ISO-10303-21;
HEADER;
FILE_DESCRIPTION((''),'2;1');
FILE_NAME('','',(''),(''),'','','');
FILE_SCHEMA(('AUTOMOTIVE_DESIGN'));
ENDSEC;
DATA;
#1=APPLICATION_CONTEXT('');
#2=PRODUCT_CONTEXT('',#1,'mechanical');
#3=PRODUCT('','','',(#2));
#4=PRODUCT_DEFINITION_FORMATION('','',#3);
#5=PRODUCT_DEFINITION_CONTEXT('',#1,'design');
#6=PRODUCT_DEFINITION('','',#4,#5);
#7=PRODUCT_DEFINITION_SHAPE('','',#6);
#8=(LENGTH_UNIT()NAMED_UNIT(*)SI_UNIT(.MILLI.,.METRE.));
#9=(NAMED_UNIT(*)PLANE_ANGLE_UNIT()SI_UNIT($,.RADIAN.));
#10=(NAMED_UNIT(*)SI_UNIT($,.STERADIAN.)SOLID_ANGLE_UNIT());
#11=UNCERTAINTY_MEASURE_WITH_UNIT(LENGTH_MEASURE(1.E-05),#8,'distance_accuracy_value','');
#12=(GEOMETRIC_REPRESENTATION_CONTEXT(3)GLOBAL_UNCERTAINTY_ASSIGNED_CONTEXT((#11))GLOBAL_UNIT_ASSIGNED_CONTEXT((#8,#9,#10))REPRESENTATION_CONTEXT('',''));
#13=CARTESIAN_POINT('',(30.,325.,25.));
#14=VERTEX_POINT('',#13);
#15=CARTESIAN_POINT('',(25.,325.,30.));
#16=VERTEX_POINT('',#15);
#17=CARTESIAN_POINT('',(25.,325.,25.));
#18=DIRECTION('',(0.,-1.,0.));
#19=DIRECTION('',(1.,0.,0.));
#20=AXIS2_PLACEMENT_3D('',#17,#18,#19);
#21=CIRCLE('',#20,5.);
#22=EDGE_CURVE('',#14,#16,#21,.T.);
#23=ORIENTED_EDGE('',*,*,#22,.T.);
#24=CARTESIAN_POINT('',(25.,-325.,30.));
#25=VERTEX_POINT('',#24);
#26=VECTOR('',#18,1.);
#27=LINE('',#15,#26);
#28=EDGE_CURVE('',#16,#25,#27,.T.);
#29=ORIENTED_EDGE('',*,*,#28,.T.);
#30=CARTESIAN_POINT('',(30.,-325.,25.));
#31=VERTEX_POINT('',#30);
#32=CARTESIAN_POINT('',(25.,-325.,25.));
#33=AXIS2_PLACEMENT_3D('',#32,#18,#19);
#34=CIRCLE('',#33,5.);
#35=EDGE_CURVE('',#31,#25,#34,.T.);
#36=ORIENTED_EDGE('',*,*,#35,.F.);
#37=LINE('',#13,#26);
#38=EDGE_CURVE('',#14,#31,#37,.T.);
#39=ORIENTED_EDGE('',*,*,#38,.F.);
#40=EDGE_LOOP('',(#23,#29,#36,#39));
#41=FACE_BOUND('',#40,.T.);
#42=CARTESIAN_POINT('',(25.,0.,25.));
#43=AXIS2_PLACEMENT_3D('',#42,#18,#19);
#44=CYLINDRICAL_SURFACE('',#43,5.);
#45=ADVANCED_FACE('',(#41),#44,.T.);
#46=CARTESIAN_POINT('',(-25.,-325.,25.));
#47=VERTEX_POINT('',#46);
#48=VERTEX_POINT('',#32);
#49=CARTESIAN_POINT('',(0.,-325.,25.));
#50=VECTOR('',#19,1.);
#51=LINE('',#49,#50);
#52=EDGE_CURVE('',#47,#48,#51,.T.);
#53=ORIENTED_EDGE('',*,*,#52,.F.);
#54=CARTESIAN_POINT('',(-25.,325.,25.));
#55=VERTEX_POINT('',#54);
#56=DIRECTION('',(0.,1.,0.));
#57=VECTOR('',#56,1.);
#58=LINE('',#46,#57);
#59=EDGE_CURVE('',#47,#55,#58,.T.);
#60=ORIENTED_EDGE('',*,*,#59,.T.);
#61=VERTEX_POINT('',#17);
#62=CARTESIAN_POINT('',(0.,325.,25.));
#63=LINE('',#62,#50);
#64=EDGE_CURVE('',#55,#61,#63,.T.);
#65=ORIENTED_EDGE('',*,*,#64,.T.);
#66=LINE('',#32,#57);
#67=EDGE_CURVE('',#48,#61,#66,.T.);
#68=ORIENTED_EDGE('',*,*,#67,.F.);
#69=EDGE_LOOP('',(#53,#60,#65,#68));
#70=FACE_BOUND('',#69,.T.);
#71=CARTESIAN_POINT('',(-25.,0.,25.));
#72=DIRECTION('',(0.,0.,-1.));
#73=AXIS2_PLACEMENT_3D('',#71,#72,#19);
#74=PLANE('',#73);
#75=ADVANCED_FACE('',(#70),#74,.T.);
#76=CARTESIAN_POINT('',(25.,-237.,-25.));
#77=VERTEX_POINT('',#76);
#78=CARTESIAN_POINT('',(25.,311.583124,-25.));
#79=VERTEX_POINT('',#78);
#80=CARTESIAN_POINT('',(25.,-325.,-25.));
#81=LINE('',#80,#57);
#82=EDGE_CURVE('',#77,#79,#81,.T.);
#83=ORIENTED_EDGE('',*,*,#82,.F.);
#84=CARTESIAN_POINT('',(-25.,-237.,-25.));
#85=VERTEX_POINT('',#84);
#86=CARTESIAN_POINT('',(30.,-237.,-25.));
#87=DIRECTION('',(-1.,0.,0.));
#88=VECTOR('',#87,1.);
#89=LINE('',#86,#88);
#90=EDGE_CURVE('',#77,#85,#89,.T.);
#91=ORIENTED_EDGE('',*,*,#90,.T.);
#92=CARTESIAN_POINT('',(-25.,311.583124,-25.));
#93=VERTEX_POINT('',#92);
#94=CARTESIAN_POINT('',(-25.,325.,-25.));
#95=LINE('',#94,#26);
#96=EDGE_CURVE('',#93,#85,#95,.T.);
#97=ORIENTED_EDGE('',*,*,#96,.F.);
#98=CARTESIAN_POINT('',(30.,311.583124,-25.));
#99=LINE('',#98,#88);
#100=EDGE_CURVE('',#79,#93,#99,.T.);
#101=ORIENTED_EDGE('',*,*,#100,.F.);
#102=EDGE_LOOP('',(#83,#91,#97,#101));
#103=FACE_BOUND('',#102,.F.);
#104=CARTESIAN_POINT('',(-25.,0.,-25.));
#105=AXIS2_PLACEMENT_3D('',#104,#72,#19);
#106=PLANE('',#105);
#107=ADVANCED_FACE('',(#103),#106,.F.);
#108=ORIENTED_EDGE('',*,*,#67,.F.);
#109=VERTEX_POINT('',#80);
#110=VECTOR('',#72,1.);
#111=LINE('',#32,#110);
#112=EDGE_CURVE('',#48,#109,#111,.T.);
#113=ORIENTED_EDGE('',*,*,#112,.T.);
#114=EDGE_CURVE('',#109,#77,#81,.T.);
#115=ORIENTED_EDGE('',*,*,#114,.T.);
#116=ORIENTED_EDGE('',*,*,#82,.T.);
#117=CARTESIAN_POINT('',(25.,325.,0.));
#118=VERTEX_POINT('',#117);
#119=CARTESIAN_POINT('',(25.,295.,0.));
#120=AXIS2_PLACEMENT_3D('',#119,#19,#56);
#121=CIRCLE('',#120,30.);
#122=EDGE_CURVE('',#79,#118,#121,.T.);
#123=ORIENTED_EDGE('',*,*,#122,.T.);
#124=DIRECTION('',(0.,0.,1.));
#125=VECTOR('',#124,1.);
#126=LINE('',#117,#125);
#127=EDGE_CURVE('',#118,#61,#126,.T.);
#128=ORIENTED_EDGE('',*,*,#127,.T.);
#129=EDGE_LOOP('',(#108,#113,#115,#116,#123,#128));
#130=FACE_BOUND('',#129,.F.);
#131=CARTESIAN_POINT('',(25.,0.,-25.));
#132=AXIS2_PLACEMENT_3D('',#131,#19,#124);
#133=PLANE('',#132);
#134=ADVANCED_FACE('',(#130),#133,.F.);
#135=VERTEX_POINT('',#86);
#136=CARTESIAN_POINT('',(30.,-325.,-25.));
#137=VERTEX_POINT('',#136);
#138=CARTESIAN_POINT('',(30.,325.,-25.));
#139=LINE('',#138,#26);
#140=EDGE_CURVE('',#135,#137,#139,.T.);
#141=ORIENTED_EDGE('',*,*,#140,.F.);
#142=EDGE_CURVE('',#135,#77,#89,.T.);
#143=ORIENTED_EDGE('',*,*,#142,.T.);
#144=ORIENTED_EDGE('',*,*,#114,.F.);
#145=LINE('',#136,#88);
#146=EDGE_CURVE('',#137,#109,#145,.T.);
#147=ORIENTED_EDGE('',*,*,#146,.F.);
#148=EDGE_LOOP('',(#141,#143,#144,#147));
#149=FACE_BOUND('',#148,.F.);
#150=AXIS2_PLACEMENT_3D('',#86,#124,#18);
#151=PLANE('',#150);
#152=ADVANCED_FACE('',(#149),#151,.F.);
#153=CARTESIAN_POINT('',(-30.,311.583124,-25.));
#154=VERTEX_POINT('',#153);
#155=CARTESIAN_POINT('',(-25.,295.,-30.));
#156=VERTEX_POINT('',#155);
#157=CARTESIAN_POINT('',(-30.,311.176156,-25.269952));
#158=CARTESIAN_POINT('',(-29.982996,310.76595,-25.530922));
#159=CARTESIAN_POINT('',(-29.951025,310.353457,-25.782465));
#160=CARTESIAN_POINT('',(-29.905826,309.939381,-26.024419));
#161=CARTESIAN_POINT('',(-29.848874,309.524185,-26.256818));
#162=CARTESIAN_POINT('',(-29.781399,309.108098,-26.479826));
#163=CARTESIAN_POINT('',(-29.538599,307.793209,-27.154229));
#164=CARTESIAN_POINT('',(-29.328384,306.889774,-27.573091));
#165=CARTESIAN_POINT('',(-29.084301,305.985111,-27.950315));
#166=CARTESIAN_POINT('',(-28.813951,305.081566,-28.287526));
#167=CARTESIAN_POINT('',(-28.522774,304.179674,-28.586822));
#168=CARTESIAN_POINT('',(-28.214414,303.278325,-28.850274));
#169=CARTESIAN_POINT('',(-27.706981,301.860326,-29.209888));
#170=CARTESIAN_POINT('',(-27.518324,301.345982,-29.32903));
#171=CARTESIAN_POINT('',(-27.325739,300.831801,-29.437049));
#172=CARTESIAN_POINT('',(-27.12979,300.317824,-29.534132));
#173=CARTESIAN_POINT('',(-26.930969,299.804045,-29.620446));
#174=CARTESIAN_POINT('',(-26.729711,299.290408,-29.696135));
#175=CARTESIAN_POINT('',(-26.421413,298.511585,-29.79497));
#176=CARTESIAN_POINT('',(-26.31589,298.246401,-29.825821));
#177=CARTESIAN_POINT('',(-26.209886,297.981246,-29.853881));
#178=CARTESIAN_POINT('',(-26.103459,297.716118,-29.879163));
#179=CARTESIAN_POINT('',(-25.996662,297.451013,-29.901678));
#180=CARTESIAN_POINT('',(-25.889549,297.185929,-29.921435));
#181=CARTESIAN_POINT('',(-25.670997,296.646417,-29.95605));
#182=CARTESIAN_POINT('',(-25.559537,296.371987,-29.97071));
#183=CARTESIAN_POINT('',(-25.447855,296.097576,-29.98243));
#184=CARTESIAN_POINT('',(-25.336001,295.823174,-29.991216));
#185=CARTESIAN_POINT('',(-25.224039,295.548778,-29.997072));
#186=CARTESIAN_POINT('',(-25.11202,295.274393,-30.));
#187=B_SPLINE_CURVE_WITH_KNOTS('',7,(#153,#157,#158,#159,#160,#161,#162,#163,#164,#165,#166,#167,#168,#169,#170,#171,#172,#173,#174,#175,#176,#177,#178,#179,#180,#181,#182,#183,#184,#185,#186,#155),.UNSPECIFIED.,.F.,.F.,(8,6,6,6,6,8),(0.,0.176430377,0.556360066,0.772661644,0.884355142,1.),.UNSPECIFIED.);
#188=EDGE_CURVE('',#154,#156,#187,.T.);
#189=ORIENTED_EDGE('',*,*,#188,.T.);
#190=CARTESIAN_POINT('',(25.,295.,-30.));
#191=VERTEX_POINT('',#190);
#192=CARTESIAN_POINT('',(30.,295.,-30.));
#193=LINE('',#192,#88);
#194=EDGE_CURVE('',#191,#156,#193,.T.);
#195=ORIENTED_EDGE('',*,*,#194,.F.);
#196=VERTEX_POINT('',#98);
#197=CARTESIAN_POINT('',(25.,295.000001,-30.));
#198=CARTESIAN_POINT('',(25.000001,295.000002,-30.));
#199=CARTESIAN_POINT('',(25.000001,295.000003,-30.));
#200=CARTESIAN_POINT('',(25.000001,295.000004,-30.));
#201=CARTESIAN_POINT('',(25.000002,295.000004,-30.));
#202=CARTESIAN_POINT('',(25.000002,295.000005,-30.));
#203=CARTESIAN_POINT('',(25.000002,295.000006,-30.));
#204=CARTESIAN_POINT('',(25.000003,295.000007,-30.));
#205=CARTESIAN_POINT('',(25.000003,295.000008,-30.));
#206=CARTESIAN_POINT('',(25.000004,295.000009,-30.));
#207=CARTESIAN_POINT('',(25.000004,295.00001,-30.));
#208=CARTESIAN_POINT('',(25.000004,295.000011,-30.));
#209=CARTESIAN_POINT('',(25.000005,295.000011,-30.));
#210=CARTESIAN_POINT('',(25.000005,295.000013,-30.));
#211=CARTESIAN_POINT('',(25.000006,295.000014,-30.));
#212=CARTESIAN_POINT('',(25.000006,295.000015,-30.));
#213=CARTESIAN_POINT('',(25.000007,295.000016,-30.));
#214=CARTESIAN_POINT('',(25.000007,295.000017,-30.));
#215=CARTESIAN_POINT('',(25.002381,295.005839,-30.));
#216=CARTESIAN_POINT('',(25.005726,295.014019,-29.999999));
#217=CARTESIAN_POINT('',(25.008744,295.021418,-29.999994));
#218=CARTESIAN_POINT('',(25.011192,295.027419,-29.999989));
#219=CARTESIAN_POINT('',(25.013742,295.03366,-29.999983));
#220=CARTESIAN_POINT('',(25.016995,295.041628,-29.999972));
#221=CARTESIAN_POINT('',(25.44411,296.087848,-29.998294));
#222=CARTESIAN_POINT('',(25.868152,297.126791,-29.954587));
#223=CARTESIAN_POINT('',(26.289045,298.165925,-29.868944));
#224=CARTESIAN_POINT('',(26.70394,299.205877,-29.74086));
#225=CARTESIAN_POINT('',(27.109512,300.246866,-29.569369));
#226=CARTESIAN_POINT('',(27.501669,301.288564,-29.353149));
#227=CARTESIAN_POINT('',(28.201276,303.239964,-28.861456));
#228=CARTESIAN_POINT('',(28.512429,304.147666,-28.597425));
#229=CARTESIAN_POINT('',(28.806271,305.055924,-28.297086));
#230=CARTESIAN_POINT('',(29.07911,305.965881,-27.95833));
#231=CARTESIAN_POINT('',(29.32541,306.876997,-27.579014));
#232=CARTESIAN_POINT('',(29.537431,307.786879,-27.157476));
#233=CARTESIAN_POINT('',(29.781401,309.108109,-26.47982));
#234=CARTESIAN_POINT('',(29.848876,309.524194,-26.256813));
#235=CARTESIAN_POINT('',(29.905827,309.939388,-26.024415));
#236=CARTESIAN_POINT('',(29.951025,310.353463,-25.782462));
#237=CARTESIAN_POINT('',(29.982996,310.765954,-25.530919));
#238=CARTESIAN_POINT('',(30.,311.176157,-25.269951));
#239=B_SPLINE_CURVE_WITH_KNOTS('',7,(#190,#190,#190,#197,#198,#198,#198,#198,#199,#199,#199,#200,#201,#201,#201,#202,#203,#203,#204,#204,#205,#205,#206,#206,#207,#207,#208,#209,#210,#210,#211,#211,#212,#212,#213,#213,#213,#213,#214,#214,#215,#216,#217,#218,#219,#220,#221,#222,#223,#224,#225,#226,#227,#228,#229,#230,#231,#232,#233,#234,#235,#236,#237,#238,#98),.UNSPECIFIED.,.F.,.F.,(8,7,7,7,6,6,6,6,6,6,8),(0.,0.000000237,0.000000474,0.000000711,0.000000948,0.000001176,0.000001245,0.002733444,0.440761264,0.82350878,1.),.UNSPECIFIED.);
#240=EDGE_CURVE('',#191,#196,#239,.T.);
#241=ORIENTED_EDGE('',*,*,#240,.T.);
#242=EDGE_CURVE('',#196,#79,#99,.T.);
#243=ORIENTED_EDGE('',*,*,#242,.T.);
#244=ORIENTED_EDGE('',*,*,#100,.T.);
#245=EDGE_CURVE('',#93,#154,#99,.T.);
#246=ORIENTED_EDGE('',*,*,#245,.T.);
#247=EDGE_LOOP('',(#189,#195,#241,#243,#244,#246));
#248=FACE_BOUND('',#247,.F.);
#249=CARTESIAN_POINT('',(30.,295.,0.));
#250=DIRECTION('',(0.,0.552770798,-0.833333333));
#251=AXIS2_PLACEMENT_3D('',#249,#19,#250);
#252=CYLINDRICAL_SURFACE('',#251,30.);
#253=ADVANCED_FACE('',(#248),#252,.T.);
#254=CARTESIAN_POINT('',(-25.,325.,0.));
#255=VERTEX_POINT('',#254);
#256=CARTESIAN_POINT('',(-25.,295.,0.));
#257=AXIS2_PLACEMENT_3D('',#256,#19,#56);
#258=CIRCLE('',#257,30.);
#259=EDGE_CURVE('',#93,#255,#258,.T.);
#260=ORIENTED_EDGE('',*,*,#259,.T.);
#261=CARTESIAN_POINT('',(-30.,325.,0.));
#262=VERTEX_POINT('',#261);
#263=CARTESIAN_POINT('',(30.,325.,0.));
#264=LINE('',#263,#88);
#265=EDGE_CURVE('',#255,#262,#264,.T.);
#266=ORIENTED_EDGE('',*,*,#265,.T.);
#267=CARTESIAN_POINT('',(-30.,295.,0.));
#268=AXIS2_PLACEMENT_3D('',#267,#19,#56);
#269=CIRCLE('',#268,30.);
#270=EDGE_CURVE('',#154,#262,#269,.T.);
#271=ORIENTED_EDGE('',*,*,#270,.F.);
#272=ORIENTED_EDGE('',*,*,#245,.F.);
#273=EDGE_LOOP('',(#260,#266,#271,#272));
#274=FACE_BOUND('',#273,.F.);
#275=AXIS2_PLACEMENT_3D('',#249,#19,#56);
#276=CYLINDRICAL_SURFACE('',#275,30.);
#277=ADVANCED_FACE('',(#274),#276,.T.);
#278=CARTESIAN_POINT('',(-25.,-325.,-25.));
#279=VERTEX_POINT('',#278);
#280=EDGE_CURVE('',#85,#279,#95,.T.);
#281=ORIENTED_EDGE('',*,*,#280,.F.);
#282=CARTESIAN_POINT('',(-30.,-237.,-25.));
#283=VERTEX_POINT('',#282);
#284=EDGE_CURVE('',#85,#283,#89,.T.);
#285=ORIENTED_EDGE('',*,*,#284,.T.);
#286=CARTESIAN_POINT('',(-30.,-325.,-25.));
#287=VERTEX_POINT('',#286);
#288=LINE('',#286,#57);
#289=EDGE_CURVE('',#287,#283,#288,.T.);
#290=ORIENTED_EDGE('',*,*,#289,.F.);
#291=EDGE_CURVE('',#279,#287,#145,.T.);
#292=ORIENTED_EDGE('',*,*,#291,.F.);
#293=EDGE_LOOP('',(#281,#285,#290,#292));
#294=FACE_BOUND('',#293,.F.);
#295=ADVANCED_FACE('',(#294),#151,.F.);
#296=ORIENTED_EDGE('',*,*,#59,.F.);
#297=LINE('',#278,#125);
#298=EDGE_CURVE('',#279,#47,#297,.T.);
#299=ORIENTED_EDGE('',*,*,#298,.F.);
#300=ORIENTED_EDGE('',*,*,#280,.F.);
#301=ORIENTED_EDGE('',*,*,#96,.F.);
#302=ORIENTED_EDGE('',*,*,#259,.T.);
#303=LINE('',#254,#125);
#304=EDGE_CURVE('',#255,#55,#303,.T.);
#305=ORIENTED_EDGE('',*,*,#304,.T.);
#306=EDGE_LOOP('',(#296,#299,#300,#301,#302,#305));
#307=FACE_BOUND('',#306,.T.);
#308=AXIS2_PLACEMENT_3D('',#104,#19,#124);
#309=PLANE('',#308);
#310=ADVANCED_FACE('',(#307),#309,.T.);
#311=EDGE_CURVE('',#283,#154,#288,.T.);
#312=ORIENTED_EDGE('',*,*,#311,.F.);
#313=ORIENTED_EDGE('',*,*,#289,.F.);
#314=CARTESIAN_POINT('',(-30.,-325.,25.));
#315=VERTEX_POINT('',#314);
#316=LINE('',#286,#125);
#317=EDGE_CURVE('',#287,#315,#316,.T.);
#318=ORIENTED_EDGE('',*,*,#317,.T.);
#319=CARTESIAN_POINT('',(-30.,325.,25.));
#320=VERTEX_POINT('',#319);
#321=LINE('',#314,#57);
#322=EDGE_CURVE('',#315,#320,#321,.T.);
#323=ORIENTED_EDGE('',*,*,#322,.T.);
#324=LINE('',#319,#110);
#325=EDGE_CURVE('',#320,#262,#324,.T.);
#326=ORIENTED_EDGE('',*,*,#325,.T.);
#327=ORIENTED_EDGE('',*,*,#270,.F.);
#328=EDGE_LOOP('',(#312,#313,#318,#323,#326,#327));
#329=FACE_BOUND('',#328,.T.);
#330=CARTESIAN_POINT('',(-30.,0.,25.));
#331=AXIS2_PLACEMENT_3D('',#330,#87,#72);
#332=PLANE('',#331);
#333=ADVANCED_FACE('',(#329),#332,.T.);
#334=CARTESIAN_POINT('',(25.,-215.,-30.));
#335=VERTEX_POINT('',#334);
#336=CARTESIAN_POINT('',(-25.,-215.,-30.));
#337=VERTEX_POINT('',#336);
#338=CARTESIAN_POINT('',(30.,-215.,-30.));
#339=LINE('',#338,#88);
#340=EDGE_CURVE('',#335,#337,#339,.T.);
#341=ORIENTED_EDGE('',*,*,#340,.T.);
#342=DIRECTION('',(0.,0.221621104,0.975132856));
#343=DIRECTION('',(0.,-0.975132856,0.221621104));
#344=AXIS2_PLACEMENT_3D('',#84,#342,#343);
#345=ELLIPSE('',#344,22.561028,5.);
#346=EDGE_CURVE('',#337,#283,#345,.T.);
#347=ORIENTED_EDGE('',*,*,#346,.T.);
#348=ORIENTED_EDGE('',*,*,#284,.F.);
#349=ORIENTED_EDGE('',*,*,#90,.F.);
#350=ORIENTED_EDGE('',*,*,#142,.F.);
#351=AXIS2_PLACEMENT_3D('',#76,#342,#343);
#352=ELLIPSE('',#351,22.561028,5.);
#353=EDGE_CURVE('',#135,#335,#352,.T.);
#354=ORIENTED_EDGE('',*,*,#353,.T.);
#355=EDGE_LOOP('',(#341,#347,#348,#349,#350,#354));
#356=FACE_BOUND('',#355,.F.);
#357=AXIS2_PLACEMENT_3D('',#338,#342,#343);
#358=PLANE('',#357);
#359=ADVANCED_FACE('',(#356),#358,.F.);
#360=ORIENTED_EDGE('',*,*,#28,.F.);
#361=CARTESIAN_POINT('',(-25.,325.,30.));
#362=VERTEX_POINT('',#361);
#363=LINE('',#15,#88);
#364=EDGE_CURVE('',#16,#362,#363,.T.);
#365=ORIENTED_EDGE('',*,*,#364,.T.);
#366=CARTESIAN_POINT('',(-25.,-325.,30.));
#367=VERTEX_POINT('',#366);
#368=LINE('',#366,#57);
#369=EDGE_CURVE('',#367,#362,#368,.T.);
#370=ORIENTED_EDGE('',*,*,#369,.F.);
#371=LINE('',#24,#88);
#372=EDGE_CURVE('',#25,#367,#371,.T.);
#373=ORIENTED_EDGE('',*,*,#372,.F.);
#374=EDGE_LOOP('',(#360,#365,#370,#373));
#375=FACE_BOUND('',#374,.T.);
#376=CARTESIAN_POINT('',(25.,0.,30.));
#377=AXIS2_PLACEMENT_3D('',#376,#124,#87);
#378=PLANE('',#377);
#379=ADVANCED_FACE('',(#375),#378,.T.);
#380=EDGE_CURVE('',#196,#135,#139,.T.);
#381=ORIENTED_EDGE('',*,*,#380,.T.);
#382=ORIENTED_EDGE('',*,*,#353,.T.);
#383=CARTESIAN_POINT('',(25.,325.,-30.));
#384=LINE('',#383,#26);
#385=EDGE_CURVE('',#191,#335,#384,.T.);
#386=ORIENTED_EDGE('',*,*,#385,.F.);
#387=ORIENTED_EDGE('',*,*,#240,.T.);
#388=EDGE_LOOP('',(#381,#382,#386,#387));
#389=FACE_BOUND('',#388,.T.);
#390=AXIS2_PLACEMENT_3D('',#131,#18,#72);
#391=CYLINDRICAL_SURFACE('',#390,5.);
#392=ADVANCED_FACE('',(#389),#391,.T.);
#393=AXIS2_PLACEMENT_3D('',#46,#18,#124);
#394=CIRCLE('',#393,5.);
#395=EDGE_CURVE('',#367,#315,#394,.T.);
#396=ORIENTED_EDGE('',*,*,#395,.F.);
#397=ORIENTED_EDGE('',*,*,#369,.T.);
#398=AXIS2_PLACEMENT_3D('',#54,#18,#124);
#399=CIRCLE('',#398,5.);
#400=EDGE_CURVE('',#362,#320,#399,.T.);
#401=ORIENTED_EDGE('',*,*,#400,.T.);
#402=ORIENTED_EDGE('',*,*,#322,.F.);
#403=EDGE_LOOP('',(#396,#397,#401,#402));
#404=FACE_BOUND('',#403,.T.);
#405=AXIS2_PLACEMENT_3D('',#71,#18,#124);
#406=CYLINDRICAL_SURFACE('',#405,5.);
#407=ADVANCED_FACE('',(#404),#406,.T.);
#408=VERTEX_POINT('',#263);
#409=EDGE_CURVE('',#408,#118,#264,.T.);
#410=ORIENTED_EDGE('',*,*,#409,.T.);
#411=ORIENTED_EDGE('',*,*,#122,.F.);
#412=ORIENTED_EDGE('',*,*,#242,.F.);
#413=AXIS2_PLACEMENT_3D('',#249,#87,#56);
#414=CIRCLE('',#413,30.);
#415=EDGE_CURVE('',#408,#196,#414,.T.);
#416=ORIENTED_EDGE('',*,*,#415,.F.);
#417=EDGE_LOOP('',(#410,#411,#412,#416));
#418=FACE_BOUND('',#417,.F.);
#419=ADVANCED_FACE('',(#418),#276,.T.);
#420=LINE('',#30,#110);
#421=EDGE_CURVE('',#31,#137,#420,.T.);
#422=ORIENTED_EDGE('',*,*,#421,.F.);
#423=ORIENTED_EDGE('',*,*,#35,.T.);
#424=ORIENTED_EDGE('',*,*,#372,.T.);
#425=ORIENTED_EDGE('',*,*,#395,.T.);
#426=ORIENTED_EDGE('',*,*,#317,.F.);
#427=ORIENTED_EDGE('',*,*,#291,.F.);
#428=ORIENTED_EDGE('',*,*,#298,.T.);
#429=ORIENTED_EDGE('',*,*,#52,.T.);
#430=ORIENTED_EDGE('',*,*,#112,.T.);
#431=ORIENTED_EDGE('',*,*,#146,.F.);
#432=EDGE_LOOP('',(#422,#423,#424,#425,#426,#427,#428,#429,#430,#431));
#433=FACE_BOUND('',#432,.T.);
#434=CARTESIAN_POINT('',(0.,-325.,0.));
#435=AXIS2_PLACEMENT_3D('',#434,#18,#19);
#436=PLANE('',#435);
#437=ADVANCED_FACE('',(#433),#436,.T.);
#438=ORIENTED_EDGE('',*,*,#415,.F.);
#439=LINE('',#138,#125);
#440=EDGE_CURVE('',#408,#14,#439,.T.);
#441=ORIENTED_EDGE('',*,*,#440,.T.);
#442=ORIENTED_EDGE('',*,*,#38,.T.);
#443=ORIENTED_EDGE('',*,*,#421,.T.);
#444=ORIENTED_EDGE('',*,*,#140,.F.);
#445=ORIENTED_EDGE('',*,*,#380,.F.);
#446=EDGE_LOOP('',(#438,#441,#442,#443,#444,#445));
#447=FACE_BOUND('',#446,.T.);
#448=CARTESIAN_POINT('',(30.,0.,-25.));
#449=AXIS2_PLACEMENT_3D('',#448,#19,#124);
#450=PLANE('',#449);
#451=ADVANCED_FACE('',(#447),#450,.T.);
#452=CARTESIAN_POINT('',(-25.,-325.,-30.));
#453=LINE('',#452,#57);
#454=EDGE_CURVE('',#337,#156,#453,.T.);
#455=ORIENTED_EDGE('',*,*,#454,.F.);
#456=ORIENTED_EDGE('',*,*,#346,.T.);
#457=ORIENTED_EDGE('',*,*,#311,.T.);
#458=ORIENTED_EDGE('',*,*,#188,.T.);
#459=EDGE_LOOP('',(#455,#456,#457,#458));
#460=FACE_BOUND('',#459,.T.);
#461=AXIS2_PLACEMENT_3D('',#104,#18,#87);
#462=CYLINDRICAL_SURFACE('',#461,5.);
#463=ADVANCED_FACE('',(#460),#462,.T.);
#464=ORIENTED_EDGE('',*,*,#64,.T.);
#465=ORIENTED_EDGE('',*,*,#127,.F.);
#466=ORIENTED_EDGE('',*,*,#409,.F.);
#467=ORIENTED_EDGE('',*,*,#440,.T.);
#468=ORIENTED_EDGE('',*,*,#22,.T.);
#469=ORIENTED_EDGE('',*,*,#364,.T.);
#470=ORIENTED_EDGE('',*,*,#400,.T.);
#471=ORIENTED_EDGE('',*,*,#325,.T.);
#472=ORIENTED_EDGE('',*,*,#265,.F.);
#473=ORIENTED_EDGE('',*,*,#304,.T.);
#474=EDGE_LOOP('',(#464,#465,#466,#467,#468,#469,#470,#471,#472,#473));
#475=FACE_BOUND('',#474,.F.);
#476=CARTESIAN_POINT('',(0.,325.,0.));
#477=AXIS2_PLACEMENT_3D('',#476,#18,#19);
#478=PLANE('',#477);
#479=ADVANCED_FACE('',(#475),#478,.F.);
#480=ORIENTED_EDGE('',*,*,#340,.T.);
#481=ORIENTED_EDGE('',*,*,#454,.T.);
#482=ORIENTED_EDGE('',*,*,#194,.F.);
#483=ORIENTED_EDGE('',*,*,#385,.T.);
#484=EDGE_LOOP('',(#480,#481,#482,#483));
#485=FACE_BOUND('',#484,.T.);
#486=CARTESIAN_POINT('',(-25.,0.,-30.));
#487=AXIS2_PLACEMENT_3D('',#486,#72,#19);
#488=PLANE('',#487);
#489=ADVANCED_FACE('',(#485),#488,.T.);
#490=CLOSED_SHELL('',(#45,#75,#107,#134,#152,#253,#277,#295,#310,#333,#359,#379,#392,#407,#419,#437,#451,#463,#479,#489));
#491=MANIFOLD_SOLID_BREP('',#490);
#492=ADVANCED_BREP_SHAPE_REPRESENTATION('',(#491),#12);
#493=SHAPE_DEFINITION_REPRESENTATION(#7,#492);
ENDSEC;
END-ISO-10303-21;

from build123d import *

# Parameters (mm, degrees)
F0_W     = 50
F0_H     = 50
F1_DEPTH = 325
F3_DEPTH = 60.001


# Not quite as in the source:
# - a feature names something its author has since deleted; it is built from what else it names


with BuildPart() as f1:
    # F0 (on Front) → F1 (new body, symmetric)
    with BuildSketch(Plane.XZ):
        with BuildLine():
            Line((-25, -30), (25, -30))
            ThreePointArc((25, -30), (28.5355339059, -28.5355339059), (30, -25))
            Line((30, -25), (30, 25))
            ThreePointArc((30, 25), (28.5355339059, 28.5355339059), (25, 30))
            Line((25, 30), (-25, 30))
            ThreePointArc((-25, 30), (-28.5355339059, 28.5355339059), (-30, 25))
            Line((-30, 25), (-30, -25))
            ThreePointArc((-30, -25), (-28.5355339059, -28.5355339059), (-25, -30))
        make_face()
        Rectangle(F0_W, F0_H, mode=Mode.SUBTRACT)
    extrude(amount=F1_DEPTH, both=True)

    # F2 (on face) → F3 (cut, through all)
    with BuildSketch(Plane.YZ.offset(30)):
        Polygon((-325, -5), (-347.579985857, -5), (-354.4286191463, -50.3063426539), (-215, -50.3063426539), (-215, -30), (-237, -25), (-325, -25), align=None)
        with BuildLine():
            Line((325, -25), (311.5831239518, -25))
            ThreePointArc((311.5831239518, -25), (303.6602540378, -28.7228132327), (295, -30))
            Line((295, -30), (295, -47.2164526592))
            Line((295, -47.2164526592), (357.106402663, -47.2164526592))
            Line((357.106402663, -47.2164526592), (357.106402663, 0))
            Line((357.106402663, 0), (325, 0))
            Line((325, 0), (325, -25))
        make_face()
        with BuildLine():
            ThreePointArc((325, 0), (321.4338203685, -14.1863716546), (311.5831239518, -25))
            Line((311.5831239518, -25), (325, -25))
            Line((325, -25), (325, 0))
        make_face()
    extrude(amount=-F3_DEPTH, mode=Mode.SUBTRACT)


solid = f1.part
